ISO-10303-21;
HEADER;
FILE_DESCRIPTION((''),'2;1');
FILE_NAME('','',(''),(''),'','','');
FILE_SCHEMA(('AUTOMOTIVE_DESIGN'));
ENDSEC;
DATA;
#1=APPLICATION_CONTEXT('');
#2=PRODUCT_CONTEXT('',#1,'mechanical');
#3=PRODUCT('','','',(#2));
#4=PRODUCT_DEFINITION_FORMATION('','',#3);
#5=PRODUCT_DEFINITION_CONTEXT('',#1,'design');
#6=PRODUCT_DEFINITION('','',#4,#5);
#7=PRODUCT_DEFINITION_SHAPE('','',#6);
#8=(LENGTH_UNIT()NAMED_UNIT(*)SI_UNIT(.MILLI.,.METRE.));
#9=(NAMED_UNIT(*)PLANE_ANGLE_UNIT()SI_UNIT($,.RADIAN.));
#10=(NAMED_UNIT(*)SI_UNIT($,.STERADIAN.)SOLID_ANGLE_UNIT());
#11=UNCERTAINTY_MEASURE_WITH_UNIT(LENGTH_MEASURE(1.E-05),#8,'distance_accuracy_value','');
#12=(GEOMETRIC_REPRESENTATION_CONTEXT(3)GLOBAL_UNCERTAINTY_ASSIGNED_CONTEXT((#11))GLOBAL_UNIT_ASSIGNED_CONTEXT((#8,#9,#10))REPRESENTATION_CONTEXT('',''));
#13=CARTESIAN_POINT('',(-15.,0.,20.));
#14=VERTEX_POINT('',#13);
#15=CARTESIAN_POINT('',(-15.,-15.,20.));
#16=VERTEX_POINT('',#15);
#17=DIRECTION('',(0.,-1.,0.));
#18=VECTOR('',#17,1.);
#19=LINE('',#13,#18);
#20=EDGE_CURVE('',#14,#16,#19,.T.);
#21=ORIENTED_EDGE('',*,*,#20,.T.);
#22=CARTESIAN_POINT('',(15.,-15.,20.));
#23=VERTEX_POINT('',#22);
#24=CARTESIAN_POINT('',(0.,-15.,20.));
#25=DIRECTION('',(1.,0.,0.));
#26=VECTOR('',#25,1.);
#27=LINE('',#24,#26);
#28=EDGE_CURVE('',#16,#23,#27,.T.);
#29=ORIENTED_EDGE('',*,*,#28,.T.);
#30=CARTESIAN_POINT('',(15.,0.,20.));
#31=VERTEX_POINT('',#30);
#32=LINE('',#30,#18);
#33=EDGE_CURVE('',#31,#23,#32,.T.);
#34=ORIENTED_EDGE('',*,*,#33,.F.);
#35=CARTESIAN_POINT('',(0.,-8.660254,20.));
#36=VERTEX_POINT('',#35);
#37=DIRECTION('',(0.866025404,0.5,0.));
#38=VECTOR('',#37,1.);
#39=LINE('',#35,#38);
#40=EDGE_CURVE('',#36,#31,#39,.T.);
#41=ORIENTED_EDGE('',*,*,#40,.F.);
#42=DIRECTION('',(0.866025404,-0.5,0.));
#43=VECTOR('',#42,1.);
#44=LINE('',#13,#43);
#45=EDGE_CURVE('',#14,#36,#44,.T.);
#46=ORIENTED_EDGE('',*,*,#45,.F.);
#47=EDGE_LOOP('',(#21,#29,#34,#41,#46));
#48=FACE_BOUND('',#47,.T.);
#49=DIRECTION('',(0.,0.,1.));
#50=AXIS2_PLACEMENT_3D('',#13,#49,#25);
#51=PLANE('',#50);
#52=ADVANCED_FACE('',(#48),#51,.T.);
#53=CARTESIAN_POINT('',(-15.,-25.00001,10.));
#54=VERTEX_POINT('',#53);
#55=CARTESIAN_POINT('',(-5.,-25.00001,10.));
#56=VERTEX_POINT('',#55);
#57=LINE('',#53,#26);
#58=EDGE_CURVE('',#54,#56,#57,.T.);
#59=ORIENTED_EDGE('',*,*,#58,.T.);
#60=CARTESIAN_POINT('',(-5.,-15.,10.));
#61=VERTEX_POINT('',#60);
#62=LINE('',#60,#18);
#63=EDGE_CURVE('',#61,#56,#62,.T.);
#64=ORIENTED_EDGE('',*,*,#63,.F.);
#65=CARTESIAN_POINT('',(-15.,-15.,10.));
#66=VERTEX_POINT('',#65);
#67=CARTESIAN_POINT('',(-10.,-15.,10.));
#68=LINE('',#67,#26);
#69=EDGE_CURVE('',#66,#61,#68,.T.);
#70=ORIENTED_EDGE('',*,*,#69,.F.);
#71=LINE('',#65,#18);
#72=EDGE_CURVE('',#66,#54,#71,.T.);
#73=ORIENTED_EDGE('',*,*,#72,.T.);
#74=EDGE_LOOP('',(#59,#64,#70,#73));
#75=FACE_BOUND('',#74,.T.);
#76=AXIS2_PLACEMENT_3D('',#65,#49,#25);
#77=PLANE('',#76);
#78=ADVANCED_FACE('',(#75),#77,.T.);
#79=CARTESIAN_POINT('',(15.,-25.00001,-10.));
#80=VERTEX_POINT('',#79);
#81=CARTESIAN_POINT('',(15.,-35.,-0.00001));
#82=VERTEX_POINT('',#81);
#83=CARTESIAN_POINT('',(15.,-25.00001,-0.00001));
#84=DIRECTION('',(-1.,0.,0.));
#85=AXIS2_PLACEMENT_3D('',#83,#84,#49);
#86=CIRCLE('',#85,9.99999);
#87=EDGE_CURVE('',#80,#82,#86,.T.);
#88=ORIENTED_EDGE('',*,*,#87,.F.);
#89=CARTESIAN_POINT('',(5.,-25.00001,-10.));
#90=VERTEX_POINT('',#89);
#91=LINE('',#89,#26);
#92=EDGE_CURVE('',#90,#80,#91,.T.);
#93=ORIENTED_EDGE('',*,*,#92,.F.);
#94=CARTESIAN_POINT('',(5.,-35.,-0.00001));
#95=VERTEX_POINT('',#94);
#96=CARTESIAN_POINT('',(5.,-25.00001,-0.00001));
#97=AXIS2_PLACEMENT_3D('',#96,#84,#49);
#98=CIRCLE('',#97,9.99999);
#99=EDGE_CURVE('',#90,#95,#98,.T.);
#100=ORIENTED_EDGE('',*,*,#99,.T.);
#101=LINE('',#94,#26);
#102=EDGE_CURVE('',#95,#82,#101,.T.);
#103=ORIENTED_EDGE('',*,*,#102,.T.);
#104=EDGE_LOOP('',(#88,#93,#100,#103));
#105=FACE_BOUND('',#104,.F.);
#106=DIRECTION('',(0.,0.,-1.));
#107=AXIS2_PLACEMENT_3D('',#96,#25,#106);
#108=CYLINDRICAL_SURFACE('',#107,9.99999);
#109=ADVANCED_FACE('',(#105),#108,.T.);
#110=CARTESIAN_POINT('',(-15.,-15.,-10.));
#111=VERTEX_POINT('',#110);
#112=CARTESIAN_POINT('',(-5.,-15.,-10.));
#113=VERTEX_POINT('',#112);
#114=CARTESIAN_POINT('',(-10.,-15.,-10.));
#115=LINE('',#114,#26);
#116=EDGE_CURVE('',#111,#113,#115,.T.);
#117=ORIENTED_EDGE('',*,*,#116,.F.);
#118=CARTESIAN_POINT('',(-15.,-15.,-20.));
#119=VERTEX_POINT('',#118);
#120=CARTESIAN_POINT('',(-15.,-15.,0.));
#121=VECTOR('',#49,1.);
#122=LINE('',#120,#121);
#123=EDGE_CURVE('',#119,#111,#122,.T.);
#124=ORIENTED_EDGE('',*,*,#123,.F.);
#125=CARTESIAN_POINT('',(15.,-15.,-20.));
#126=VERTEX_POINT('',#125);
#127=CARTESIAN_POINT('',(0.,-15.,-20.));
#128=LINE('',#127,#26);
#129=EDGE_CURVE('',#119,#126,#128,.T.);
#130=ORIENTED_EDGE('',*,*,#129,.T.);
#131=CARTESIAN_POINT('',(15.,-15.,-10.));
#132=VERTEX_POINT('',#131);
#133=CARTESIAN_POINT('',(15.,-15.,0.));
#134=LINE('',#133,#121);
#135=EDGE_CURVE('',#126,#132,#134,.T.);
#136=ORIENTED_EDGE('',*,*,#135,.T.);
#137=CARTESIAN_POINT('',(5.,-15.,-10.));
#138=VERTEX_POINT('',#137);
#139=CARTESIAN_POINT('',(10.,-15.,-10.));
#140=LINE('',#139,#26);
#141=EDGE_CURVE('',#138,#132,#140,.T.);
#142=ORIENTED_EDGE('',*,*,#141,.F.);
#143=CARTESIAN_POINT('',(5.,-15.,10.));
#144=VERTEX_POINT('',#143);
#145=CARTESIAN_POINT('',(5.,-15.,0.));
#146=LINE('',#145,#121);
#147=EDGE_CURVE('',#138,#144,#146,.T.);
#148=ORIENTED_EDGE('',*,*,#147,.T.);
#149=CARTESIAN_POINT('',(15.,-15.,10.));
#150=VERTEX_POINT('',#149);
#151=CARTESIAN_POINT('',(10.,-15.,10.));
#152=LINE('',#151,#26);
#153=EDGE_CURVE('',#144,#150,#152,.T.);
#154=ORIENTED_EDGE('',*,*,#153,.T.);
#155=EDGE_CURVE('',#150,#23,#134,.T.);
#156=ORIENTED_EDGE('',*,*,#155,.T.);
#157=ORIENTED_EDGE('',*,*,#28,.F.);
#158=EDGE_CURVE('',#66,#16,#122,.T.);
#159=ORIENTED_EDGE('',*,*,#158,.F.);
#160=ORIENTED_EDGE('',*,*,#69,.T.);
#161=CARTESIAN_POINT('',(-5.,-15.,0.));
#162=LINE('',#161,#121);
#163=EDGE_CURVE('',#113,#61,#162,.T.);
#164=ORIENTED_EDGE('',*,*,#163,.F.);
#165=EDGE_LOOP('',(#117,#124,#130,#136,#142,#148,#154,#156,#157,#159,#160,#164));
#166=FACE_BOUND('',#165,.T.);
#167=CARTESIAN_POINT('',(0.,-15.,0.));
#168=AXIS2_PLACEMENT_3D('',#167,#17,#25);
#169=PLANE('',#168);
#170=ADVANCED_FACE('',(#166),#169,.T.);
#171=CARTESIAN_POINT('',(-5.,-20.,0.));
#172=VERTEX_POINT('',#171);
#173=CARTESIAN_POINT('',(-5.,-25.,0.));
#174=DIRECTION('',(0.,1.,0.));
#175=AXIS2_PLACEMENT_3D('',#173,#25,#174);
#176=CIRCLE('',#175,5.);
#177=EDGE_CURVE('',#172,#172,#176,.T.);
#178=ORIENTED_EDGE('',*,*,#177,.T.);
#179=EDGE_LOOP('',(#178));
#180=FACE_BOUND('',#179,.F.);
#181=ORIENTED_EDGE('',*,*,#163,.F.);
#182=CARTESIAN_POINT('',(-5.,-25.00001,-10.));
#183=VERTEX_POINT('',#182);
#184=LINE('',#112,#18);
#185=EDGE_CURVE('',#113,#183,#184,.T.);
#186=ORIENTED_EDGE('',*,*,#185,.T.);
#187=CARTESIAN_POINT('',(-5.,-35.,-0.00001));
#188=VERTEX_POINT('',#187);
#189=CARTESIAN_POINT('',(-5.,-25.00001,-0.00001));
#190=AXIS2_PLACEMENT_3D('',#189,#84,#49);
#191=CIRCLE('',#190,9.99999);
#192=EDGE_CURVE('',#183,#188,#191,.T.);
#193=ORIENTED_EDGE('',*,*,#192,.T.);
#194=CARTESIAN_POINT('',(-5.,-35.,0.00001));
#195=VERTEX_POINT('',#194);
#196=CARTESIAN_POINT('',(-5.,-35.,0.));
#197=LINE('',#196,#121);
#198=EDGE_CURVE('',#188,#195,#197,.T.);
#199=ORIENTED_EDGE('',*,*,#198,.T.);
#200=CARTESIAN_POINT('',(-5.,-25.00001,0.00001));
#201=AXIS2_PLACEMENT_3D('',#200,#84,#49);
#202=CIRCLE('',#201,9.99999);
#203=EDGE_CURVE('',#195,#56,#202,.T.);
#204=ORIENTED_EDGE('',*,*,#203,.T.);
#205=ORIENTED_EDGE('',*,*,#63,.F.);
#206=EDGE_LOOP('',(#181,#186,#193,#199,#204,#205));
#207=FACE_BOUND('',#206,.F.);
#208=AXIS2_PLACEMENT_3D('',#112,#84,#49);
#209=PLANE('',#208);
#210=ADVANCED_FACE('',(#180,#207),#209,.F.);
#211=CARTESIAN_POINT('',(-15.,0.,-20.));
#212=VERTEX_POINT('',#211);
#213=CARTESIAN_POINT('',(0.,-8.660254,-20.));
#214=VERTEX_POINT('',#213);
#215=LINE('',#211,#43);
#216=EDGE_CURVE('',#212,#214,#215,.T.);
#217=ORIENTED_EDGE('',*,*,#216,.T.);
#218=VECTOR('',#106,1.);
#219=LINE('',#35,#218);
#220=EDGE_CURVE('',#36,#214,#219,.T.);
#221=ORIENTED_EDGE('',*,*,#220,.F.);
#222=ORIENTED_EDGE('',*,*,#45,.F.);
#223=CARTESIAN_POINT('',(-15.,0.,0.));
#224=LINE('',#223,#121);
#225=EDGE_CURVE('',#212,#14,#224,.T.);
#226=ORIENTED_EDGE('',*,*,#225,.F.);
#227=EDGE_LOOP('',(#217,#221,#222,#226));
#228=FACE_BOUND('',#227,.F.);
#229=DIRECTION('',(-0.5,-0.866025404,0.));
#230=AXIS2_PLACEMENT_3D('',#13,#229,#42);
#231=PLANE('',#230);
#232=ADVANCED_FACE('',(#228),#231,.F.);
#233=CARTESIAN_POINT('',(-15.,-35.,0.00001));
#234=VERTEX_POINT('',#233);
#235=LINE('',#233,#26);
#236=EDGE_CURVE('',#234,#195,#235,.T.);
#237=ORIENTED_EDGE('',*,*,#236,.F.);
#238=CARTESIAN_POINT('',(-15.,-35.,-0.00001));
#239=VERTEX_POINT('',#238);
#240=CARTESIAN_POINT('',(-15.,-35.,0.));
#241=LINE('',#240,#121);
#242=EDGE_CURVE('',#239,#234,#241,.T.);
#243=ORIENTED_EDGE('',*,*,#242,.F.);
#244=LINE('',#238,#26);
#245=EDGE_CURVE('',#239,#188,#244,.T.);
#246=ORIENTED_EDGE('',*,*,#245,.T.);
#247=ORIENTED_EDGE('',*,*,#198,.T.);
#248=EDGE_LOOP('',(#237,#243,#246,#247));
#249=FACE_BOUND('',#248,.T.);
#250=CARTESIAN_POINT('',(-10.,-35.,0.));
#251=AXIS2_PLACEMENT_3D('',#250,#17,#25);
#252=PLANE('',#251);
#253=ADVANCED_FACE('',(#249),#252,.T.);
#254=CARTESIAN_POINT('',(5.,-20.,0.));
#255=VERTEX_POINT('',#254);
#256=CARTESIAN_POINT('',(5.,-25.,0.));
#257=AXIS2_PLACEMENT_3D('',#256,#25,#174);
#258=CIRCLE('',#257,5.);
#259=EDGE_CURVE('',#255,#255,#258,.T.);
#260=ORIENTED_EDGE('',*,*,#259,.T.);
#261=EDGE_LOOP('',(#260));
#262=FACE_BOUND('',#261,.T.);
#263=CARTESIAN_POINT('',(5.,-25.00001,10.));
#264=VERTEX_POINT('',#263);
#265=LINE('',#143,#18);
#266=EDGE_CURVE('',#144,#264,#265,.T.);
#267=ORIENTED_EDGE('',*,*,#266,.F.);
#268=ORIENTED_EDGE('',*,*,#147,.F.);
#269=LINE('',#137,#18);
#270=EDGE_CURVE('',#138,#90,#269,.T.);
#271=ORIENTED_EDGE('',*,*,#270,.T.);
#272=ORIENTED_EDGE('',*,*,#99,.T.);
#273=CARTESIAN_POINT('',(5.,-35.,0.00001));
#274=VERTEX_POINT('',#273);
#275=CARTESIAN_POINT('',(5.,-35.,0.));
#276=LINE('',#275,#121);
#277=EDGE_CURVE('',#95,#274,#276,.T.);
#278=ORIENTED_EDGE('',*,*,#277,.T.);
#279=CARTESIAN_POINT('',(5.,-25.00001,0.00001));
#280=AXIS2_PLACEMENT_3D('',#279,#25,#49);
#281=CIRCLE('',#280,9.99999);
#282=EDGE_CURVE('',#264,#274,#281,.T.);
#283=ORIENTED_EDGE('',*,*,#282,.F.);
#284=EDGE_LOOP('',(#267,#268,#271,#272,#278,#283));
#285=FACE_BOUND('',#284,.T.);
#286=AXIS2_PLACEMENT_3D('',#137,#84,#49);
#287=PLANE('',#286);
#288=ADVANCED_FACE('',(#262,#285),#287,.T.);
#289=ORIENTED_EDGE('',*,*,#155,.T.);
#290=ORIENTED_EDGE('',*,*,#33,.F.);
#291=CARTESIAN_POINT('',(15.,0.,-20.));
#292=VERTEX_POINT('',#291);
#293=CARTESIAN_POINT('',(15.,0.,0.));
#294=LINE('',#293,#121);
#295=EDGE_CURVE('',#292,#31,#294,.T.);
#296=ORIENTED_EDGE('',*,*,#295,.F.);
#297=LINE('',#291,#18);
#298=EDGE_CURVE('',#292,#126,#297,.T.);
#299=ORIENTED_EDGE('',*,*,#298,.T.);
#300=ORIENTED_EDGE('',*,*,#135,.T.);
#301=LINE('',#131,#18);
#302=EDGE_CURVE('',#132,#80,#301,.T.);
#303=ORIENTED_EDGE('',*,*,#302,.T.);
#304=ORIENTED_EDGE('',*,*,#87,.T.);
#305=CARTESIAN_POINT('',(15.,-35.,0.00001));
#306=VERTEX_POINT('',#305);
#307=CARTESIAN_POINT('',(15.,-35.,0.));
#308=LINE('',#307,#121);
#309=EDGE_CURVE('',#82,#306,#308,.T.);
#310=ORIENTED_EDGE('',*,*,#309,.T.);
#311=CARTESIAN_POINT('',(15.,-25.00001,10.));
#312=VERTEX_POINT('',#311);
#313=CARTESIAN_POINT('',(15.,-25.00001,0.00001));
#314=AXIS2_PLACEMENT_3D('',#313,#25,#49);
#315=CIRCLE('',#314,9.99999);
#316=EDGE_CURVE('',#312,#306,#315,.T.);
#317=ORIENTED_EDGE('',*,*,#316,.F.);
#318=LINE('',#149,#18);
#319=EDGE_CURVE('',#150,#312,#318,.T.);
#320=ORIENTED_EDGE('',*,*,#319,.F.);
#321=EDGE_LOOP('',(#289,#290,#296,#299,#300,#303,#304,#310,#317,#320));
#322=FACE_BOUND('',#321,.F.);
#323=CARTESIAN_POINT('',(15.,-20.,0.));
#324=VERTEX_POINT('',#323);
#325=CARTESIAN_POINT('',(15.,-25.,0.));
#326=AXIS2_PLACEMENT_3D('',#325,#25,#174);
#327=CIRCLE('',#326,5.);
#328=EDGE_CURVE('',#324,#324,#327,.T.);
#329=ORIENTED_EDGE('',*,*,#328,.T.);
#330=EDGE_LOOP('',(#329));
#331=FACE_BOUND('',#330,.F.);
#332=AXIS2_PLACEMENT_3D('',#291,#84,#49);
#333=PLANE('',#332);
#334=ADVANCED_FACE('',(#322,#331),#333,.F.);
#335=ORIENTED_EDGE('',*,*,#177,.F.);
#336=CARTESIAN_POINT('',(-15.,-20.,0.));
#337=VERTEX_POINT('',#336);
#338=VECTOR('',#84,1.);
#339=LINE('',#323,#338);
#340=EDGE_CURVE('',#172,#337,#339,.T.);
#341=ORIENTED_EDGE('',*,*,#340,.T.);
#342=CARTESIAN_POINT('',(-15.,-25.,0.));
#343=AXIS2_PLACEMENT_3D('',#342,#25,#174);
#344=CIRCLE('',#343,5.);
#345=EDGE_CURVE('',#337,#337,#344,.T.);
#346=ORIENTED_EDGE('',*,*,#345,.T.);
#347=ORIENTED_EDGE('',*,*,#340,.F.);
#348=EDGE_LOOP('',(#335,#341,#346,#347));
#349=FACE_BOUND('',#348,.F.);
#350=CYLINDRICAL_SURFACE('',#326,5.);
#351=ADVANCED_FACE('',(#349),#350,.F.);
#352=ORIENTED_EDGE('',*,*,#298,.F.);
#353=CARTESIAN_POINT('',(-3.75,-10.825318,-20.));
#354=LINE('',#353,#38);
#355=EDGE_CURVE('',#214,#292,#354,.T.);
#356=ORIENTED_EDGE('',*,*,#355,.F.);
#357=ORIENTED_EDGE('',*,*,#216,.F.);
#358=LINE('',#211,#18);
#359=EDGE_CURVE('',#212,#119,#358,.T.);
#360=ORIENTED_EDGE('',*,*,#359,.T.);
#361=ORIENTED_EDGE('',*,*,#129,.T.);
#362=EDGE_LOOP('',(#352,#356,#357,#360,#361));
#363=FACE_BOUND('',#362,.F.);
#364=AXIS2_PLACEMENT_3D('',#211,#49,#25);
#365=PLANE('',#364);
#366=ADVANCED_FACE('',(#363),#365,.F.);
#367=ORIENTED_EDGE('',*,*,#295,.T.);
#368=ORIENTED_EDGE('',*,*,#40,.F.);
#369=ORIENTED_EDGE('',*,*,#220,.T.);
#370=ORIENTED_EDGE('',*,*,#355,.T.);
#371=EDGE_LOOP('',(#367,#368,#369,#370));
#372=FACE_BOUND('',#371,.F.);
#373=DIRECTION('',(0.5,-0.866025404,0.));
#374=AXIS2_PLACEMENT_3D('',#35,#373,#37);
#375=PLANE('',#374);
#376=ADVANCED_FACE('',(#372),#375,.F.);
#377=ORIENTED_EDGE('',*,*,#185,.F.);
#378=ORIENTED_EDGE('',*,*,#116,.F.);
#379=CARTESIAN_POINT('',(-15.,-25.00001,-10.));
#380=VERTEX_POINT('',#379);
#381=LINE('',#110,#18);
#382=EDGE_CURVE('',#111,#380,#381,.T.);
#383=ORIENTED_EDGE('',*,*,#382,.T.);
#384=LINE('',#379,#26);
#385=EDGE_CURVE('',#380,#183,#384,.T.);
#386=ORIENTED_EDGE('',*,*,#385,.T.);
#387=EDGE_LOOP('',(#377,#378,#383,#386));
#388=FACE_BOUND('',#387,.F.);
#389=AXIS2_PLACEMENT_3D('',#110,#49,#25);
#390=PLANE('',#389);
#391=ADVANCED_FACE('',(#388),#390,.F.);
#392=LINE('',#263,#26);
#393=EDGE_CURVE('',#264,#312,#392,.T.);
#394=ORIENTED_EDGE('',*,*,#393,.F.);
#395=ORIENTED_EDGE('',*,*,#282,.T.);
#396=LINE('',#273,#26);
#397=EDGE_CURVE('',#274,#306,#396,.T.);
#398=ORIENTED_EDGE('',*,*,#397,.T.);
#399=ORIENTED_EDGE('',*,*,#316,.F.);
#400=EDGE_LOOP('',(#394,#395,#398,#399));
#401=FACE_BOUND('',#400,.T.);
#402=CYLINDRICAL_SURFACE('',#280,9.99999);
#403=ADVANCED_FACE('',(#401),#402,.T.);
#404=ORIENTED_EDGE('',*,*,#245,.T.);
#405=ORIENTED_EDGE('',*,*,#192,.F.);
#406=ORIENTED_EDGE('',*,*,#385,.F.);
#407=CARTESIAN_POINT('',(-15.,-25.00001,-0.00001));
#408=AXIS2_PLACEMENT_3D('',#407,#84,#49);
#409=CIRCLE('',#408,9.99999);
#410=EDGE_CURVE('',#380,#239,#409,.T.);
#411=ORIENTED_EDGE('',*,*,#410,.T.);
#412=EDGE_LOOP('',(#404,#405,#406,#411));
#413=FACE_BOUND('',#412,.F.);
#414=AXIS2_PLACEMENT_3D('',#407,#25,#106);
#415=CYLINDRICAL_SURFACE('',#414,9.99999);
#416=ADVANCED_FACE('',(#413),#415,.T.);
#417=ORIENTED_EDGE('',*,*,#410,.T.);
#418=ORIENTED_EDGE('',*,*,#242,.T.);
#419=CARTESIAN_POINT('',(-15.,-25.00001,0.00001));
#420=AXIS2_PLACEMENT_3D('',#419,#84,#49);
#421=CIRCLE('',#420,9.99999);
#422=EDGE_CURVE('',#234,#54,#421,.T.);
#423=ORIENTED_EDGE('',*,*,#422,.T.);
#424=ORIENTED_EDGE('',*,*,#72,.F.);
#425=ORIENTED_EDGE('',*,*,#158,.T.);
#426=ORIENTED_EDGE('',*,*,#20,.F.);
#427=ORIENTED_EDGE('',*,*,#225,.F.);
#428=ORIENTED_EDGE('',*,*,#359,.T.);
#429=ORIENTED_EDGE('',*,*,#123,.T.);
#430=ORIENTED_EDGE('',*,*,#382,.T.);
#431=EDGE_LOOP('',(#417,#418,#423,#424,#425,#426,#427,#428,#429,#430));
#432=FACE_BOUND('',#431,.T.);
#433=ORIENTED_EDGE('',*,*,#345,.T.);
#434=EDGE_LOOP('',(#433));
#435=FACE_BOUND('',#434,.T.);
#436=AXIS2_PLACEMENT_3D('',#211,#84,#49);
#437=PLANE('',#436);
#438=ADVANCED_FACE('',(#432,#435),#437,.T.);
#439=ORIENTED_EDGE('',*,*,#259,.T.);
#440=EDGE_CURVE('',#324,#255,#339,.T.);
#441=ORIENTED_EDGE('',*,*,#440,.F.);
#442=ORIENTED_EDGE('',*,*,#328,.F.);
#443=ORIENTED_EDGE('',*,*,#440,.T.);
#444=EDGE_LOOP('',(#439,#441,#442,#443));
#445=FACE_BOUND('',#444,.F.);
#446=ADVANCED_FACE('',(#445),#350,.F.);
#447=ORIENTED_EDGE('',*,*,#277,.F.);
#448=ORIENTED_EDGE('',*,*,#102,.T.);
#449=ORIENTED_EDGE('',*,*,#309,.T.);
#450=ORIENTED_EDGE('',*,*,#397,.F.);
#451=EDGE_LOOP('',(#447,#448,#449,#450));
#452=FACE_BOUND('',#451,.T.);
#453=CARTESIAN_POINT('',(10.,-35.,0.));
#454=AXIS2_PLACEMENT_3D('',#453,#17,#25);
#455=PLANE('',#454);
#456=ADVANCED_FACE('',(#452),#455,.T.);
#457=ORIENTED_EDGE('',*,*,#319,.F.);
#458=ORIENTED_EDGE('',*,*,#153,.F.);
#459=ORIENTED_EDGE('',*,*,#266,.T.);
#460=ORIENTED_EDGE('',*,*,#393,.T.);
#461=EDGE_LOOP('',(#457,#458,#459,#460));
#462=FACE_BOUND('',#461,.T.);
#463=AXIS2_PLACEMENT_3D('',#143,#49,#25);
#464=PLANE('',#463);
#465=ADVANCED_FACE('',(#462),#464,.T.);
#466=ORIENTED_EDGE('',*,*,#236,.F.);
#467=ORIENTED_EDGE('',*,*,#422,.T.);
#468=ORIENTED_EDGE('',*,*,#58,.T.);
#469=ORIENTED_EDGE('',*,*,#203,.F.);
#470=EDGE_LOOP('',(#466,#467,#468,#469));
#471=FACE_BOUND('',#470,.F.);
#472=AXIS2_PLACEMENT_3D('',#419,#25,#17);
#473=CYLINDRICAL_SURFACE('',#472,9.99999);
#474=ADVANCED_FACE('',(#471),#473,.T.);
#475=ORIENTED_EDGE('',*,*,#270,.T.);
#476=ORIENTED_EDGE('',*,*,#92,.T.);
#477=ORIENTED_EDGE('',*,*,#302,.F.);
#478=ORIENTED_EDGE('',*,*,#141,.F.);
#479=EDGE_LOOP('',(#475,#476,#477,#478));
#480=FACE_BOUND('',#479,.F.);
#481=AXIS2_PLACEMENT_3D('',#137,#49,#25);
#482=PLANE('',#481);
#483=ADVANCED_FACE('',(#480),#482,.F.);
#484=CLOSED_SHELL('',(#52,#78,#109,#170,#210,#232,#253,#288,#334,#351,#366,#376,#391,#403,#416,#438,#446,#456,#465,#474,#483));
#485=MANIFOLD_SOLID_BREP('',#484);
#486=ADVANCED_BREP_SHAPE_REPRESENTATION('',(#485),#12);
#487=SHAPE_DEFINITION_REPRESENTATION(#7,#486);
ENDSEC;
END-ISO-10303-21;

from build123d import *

# Parameters (mm, degrees)
F0_W     = 30
F0_H     = 40
F1_DEPTH = 15
F2_W     = 10
F2_H     = 20
F3_DEPTH = 20
F4_R     = 5
F5_DEPTH = 30.001
F6_R     = 9.99999
F8_DEPTH = 40.001


# Not quite as in the source:
# - a fillet or chamfer is up to 0.001 mm smaller than in the source, because OpenCascade refuses the exact size


with BuildPart() as f1:
    # F0 (on Front) → F1 (new body)
    with BuildSketch(Plane.XZ):
        Rectangle(F0_W, F0_H)
    extrude(amount=F1_DEPTH)

    # F2 (on face) → F3 (join)
    with BuildSketch(Plane.XZ.offset(15)):
        with Locations((-10, 0)):
            Rectangle(F2_W, F2_H)
        with Locations((10, 0)):
            Rectangle(F2_W, F2_H)
    extrude(amount=F3_DEPTH)

    # F4 (on face) → F5 (cut, through all)
    with BuildSketch(Plane.YZ.offset(15)):
        with Locations((-25, 0)):
            Circle(F4_R)
    extrude(amount=-F5_DEPTH, mode=Mode.SUBTRACT)

    # F6 (radius 10 in the source; OpenCascade refuses exactly that, so slightly less here)
    f6_edges = [f1.edges().sort_by_distance(p)[0] for p in [
        (10, -35, 10),
        (-10, -35, 10),
        (-10, -35, -10),
        (10, -35, -10),
    ]]
    fillet(f6_edges, radius=F6_R)

    # F7 (on face) → F8 (cut, through all)
    with BuildSketch(Plane.XY.offset(20)):
        Polygon((15, 0), (-15, 0), (0, -8.6602540378), align=None)
    extrude(amount=-F8_DEPTH, mode=Mode.SUBTRACT)


solid = f1.part
